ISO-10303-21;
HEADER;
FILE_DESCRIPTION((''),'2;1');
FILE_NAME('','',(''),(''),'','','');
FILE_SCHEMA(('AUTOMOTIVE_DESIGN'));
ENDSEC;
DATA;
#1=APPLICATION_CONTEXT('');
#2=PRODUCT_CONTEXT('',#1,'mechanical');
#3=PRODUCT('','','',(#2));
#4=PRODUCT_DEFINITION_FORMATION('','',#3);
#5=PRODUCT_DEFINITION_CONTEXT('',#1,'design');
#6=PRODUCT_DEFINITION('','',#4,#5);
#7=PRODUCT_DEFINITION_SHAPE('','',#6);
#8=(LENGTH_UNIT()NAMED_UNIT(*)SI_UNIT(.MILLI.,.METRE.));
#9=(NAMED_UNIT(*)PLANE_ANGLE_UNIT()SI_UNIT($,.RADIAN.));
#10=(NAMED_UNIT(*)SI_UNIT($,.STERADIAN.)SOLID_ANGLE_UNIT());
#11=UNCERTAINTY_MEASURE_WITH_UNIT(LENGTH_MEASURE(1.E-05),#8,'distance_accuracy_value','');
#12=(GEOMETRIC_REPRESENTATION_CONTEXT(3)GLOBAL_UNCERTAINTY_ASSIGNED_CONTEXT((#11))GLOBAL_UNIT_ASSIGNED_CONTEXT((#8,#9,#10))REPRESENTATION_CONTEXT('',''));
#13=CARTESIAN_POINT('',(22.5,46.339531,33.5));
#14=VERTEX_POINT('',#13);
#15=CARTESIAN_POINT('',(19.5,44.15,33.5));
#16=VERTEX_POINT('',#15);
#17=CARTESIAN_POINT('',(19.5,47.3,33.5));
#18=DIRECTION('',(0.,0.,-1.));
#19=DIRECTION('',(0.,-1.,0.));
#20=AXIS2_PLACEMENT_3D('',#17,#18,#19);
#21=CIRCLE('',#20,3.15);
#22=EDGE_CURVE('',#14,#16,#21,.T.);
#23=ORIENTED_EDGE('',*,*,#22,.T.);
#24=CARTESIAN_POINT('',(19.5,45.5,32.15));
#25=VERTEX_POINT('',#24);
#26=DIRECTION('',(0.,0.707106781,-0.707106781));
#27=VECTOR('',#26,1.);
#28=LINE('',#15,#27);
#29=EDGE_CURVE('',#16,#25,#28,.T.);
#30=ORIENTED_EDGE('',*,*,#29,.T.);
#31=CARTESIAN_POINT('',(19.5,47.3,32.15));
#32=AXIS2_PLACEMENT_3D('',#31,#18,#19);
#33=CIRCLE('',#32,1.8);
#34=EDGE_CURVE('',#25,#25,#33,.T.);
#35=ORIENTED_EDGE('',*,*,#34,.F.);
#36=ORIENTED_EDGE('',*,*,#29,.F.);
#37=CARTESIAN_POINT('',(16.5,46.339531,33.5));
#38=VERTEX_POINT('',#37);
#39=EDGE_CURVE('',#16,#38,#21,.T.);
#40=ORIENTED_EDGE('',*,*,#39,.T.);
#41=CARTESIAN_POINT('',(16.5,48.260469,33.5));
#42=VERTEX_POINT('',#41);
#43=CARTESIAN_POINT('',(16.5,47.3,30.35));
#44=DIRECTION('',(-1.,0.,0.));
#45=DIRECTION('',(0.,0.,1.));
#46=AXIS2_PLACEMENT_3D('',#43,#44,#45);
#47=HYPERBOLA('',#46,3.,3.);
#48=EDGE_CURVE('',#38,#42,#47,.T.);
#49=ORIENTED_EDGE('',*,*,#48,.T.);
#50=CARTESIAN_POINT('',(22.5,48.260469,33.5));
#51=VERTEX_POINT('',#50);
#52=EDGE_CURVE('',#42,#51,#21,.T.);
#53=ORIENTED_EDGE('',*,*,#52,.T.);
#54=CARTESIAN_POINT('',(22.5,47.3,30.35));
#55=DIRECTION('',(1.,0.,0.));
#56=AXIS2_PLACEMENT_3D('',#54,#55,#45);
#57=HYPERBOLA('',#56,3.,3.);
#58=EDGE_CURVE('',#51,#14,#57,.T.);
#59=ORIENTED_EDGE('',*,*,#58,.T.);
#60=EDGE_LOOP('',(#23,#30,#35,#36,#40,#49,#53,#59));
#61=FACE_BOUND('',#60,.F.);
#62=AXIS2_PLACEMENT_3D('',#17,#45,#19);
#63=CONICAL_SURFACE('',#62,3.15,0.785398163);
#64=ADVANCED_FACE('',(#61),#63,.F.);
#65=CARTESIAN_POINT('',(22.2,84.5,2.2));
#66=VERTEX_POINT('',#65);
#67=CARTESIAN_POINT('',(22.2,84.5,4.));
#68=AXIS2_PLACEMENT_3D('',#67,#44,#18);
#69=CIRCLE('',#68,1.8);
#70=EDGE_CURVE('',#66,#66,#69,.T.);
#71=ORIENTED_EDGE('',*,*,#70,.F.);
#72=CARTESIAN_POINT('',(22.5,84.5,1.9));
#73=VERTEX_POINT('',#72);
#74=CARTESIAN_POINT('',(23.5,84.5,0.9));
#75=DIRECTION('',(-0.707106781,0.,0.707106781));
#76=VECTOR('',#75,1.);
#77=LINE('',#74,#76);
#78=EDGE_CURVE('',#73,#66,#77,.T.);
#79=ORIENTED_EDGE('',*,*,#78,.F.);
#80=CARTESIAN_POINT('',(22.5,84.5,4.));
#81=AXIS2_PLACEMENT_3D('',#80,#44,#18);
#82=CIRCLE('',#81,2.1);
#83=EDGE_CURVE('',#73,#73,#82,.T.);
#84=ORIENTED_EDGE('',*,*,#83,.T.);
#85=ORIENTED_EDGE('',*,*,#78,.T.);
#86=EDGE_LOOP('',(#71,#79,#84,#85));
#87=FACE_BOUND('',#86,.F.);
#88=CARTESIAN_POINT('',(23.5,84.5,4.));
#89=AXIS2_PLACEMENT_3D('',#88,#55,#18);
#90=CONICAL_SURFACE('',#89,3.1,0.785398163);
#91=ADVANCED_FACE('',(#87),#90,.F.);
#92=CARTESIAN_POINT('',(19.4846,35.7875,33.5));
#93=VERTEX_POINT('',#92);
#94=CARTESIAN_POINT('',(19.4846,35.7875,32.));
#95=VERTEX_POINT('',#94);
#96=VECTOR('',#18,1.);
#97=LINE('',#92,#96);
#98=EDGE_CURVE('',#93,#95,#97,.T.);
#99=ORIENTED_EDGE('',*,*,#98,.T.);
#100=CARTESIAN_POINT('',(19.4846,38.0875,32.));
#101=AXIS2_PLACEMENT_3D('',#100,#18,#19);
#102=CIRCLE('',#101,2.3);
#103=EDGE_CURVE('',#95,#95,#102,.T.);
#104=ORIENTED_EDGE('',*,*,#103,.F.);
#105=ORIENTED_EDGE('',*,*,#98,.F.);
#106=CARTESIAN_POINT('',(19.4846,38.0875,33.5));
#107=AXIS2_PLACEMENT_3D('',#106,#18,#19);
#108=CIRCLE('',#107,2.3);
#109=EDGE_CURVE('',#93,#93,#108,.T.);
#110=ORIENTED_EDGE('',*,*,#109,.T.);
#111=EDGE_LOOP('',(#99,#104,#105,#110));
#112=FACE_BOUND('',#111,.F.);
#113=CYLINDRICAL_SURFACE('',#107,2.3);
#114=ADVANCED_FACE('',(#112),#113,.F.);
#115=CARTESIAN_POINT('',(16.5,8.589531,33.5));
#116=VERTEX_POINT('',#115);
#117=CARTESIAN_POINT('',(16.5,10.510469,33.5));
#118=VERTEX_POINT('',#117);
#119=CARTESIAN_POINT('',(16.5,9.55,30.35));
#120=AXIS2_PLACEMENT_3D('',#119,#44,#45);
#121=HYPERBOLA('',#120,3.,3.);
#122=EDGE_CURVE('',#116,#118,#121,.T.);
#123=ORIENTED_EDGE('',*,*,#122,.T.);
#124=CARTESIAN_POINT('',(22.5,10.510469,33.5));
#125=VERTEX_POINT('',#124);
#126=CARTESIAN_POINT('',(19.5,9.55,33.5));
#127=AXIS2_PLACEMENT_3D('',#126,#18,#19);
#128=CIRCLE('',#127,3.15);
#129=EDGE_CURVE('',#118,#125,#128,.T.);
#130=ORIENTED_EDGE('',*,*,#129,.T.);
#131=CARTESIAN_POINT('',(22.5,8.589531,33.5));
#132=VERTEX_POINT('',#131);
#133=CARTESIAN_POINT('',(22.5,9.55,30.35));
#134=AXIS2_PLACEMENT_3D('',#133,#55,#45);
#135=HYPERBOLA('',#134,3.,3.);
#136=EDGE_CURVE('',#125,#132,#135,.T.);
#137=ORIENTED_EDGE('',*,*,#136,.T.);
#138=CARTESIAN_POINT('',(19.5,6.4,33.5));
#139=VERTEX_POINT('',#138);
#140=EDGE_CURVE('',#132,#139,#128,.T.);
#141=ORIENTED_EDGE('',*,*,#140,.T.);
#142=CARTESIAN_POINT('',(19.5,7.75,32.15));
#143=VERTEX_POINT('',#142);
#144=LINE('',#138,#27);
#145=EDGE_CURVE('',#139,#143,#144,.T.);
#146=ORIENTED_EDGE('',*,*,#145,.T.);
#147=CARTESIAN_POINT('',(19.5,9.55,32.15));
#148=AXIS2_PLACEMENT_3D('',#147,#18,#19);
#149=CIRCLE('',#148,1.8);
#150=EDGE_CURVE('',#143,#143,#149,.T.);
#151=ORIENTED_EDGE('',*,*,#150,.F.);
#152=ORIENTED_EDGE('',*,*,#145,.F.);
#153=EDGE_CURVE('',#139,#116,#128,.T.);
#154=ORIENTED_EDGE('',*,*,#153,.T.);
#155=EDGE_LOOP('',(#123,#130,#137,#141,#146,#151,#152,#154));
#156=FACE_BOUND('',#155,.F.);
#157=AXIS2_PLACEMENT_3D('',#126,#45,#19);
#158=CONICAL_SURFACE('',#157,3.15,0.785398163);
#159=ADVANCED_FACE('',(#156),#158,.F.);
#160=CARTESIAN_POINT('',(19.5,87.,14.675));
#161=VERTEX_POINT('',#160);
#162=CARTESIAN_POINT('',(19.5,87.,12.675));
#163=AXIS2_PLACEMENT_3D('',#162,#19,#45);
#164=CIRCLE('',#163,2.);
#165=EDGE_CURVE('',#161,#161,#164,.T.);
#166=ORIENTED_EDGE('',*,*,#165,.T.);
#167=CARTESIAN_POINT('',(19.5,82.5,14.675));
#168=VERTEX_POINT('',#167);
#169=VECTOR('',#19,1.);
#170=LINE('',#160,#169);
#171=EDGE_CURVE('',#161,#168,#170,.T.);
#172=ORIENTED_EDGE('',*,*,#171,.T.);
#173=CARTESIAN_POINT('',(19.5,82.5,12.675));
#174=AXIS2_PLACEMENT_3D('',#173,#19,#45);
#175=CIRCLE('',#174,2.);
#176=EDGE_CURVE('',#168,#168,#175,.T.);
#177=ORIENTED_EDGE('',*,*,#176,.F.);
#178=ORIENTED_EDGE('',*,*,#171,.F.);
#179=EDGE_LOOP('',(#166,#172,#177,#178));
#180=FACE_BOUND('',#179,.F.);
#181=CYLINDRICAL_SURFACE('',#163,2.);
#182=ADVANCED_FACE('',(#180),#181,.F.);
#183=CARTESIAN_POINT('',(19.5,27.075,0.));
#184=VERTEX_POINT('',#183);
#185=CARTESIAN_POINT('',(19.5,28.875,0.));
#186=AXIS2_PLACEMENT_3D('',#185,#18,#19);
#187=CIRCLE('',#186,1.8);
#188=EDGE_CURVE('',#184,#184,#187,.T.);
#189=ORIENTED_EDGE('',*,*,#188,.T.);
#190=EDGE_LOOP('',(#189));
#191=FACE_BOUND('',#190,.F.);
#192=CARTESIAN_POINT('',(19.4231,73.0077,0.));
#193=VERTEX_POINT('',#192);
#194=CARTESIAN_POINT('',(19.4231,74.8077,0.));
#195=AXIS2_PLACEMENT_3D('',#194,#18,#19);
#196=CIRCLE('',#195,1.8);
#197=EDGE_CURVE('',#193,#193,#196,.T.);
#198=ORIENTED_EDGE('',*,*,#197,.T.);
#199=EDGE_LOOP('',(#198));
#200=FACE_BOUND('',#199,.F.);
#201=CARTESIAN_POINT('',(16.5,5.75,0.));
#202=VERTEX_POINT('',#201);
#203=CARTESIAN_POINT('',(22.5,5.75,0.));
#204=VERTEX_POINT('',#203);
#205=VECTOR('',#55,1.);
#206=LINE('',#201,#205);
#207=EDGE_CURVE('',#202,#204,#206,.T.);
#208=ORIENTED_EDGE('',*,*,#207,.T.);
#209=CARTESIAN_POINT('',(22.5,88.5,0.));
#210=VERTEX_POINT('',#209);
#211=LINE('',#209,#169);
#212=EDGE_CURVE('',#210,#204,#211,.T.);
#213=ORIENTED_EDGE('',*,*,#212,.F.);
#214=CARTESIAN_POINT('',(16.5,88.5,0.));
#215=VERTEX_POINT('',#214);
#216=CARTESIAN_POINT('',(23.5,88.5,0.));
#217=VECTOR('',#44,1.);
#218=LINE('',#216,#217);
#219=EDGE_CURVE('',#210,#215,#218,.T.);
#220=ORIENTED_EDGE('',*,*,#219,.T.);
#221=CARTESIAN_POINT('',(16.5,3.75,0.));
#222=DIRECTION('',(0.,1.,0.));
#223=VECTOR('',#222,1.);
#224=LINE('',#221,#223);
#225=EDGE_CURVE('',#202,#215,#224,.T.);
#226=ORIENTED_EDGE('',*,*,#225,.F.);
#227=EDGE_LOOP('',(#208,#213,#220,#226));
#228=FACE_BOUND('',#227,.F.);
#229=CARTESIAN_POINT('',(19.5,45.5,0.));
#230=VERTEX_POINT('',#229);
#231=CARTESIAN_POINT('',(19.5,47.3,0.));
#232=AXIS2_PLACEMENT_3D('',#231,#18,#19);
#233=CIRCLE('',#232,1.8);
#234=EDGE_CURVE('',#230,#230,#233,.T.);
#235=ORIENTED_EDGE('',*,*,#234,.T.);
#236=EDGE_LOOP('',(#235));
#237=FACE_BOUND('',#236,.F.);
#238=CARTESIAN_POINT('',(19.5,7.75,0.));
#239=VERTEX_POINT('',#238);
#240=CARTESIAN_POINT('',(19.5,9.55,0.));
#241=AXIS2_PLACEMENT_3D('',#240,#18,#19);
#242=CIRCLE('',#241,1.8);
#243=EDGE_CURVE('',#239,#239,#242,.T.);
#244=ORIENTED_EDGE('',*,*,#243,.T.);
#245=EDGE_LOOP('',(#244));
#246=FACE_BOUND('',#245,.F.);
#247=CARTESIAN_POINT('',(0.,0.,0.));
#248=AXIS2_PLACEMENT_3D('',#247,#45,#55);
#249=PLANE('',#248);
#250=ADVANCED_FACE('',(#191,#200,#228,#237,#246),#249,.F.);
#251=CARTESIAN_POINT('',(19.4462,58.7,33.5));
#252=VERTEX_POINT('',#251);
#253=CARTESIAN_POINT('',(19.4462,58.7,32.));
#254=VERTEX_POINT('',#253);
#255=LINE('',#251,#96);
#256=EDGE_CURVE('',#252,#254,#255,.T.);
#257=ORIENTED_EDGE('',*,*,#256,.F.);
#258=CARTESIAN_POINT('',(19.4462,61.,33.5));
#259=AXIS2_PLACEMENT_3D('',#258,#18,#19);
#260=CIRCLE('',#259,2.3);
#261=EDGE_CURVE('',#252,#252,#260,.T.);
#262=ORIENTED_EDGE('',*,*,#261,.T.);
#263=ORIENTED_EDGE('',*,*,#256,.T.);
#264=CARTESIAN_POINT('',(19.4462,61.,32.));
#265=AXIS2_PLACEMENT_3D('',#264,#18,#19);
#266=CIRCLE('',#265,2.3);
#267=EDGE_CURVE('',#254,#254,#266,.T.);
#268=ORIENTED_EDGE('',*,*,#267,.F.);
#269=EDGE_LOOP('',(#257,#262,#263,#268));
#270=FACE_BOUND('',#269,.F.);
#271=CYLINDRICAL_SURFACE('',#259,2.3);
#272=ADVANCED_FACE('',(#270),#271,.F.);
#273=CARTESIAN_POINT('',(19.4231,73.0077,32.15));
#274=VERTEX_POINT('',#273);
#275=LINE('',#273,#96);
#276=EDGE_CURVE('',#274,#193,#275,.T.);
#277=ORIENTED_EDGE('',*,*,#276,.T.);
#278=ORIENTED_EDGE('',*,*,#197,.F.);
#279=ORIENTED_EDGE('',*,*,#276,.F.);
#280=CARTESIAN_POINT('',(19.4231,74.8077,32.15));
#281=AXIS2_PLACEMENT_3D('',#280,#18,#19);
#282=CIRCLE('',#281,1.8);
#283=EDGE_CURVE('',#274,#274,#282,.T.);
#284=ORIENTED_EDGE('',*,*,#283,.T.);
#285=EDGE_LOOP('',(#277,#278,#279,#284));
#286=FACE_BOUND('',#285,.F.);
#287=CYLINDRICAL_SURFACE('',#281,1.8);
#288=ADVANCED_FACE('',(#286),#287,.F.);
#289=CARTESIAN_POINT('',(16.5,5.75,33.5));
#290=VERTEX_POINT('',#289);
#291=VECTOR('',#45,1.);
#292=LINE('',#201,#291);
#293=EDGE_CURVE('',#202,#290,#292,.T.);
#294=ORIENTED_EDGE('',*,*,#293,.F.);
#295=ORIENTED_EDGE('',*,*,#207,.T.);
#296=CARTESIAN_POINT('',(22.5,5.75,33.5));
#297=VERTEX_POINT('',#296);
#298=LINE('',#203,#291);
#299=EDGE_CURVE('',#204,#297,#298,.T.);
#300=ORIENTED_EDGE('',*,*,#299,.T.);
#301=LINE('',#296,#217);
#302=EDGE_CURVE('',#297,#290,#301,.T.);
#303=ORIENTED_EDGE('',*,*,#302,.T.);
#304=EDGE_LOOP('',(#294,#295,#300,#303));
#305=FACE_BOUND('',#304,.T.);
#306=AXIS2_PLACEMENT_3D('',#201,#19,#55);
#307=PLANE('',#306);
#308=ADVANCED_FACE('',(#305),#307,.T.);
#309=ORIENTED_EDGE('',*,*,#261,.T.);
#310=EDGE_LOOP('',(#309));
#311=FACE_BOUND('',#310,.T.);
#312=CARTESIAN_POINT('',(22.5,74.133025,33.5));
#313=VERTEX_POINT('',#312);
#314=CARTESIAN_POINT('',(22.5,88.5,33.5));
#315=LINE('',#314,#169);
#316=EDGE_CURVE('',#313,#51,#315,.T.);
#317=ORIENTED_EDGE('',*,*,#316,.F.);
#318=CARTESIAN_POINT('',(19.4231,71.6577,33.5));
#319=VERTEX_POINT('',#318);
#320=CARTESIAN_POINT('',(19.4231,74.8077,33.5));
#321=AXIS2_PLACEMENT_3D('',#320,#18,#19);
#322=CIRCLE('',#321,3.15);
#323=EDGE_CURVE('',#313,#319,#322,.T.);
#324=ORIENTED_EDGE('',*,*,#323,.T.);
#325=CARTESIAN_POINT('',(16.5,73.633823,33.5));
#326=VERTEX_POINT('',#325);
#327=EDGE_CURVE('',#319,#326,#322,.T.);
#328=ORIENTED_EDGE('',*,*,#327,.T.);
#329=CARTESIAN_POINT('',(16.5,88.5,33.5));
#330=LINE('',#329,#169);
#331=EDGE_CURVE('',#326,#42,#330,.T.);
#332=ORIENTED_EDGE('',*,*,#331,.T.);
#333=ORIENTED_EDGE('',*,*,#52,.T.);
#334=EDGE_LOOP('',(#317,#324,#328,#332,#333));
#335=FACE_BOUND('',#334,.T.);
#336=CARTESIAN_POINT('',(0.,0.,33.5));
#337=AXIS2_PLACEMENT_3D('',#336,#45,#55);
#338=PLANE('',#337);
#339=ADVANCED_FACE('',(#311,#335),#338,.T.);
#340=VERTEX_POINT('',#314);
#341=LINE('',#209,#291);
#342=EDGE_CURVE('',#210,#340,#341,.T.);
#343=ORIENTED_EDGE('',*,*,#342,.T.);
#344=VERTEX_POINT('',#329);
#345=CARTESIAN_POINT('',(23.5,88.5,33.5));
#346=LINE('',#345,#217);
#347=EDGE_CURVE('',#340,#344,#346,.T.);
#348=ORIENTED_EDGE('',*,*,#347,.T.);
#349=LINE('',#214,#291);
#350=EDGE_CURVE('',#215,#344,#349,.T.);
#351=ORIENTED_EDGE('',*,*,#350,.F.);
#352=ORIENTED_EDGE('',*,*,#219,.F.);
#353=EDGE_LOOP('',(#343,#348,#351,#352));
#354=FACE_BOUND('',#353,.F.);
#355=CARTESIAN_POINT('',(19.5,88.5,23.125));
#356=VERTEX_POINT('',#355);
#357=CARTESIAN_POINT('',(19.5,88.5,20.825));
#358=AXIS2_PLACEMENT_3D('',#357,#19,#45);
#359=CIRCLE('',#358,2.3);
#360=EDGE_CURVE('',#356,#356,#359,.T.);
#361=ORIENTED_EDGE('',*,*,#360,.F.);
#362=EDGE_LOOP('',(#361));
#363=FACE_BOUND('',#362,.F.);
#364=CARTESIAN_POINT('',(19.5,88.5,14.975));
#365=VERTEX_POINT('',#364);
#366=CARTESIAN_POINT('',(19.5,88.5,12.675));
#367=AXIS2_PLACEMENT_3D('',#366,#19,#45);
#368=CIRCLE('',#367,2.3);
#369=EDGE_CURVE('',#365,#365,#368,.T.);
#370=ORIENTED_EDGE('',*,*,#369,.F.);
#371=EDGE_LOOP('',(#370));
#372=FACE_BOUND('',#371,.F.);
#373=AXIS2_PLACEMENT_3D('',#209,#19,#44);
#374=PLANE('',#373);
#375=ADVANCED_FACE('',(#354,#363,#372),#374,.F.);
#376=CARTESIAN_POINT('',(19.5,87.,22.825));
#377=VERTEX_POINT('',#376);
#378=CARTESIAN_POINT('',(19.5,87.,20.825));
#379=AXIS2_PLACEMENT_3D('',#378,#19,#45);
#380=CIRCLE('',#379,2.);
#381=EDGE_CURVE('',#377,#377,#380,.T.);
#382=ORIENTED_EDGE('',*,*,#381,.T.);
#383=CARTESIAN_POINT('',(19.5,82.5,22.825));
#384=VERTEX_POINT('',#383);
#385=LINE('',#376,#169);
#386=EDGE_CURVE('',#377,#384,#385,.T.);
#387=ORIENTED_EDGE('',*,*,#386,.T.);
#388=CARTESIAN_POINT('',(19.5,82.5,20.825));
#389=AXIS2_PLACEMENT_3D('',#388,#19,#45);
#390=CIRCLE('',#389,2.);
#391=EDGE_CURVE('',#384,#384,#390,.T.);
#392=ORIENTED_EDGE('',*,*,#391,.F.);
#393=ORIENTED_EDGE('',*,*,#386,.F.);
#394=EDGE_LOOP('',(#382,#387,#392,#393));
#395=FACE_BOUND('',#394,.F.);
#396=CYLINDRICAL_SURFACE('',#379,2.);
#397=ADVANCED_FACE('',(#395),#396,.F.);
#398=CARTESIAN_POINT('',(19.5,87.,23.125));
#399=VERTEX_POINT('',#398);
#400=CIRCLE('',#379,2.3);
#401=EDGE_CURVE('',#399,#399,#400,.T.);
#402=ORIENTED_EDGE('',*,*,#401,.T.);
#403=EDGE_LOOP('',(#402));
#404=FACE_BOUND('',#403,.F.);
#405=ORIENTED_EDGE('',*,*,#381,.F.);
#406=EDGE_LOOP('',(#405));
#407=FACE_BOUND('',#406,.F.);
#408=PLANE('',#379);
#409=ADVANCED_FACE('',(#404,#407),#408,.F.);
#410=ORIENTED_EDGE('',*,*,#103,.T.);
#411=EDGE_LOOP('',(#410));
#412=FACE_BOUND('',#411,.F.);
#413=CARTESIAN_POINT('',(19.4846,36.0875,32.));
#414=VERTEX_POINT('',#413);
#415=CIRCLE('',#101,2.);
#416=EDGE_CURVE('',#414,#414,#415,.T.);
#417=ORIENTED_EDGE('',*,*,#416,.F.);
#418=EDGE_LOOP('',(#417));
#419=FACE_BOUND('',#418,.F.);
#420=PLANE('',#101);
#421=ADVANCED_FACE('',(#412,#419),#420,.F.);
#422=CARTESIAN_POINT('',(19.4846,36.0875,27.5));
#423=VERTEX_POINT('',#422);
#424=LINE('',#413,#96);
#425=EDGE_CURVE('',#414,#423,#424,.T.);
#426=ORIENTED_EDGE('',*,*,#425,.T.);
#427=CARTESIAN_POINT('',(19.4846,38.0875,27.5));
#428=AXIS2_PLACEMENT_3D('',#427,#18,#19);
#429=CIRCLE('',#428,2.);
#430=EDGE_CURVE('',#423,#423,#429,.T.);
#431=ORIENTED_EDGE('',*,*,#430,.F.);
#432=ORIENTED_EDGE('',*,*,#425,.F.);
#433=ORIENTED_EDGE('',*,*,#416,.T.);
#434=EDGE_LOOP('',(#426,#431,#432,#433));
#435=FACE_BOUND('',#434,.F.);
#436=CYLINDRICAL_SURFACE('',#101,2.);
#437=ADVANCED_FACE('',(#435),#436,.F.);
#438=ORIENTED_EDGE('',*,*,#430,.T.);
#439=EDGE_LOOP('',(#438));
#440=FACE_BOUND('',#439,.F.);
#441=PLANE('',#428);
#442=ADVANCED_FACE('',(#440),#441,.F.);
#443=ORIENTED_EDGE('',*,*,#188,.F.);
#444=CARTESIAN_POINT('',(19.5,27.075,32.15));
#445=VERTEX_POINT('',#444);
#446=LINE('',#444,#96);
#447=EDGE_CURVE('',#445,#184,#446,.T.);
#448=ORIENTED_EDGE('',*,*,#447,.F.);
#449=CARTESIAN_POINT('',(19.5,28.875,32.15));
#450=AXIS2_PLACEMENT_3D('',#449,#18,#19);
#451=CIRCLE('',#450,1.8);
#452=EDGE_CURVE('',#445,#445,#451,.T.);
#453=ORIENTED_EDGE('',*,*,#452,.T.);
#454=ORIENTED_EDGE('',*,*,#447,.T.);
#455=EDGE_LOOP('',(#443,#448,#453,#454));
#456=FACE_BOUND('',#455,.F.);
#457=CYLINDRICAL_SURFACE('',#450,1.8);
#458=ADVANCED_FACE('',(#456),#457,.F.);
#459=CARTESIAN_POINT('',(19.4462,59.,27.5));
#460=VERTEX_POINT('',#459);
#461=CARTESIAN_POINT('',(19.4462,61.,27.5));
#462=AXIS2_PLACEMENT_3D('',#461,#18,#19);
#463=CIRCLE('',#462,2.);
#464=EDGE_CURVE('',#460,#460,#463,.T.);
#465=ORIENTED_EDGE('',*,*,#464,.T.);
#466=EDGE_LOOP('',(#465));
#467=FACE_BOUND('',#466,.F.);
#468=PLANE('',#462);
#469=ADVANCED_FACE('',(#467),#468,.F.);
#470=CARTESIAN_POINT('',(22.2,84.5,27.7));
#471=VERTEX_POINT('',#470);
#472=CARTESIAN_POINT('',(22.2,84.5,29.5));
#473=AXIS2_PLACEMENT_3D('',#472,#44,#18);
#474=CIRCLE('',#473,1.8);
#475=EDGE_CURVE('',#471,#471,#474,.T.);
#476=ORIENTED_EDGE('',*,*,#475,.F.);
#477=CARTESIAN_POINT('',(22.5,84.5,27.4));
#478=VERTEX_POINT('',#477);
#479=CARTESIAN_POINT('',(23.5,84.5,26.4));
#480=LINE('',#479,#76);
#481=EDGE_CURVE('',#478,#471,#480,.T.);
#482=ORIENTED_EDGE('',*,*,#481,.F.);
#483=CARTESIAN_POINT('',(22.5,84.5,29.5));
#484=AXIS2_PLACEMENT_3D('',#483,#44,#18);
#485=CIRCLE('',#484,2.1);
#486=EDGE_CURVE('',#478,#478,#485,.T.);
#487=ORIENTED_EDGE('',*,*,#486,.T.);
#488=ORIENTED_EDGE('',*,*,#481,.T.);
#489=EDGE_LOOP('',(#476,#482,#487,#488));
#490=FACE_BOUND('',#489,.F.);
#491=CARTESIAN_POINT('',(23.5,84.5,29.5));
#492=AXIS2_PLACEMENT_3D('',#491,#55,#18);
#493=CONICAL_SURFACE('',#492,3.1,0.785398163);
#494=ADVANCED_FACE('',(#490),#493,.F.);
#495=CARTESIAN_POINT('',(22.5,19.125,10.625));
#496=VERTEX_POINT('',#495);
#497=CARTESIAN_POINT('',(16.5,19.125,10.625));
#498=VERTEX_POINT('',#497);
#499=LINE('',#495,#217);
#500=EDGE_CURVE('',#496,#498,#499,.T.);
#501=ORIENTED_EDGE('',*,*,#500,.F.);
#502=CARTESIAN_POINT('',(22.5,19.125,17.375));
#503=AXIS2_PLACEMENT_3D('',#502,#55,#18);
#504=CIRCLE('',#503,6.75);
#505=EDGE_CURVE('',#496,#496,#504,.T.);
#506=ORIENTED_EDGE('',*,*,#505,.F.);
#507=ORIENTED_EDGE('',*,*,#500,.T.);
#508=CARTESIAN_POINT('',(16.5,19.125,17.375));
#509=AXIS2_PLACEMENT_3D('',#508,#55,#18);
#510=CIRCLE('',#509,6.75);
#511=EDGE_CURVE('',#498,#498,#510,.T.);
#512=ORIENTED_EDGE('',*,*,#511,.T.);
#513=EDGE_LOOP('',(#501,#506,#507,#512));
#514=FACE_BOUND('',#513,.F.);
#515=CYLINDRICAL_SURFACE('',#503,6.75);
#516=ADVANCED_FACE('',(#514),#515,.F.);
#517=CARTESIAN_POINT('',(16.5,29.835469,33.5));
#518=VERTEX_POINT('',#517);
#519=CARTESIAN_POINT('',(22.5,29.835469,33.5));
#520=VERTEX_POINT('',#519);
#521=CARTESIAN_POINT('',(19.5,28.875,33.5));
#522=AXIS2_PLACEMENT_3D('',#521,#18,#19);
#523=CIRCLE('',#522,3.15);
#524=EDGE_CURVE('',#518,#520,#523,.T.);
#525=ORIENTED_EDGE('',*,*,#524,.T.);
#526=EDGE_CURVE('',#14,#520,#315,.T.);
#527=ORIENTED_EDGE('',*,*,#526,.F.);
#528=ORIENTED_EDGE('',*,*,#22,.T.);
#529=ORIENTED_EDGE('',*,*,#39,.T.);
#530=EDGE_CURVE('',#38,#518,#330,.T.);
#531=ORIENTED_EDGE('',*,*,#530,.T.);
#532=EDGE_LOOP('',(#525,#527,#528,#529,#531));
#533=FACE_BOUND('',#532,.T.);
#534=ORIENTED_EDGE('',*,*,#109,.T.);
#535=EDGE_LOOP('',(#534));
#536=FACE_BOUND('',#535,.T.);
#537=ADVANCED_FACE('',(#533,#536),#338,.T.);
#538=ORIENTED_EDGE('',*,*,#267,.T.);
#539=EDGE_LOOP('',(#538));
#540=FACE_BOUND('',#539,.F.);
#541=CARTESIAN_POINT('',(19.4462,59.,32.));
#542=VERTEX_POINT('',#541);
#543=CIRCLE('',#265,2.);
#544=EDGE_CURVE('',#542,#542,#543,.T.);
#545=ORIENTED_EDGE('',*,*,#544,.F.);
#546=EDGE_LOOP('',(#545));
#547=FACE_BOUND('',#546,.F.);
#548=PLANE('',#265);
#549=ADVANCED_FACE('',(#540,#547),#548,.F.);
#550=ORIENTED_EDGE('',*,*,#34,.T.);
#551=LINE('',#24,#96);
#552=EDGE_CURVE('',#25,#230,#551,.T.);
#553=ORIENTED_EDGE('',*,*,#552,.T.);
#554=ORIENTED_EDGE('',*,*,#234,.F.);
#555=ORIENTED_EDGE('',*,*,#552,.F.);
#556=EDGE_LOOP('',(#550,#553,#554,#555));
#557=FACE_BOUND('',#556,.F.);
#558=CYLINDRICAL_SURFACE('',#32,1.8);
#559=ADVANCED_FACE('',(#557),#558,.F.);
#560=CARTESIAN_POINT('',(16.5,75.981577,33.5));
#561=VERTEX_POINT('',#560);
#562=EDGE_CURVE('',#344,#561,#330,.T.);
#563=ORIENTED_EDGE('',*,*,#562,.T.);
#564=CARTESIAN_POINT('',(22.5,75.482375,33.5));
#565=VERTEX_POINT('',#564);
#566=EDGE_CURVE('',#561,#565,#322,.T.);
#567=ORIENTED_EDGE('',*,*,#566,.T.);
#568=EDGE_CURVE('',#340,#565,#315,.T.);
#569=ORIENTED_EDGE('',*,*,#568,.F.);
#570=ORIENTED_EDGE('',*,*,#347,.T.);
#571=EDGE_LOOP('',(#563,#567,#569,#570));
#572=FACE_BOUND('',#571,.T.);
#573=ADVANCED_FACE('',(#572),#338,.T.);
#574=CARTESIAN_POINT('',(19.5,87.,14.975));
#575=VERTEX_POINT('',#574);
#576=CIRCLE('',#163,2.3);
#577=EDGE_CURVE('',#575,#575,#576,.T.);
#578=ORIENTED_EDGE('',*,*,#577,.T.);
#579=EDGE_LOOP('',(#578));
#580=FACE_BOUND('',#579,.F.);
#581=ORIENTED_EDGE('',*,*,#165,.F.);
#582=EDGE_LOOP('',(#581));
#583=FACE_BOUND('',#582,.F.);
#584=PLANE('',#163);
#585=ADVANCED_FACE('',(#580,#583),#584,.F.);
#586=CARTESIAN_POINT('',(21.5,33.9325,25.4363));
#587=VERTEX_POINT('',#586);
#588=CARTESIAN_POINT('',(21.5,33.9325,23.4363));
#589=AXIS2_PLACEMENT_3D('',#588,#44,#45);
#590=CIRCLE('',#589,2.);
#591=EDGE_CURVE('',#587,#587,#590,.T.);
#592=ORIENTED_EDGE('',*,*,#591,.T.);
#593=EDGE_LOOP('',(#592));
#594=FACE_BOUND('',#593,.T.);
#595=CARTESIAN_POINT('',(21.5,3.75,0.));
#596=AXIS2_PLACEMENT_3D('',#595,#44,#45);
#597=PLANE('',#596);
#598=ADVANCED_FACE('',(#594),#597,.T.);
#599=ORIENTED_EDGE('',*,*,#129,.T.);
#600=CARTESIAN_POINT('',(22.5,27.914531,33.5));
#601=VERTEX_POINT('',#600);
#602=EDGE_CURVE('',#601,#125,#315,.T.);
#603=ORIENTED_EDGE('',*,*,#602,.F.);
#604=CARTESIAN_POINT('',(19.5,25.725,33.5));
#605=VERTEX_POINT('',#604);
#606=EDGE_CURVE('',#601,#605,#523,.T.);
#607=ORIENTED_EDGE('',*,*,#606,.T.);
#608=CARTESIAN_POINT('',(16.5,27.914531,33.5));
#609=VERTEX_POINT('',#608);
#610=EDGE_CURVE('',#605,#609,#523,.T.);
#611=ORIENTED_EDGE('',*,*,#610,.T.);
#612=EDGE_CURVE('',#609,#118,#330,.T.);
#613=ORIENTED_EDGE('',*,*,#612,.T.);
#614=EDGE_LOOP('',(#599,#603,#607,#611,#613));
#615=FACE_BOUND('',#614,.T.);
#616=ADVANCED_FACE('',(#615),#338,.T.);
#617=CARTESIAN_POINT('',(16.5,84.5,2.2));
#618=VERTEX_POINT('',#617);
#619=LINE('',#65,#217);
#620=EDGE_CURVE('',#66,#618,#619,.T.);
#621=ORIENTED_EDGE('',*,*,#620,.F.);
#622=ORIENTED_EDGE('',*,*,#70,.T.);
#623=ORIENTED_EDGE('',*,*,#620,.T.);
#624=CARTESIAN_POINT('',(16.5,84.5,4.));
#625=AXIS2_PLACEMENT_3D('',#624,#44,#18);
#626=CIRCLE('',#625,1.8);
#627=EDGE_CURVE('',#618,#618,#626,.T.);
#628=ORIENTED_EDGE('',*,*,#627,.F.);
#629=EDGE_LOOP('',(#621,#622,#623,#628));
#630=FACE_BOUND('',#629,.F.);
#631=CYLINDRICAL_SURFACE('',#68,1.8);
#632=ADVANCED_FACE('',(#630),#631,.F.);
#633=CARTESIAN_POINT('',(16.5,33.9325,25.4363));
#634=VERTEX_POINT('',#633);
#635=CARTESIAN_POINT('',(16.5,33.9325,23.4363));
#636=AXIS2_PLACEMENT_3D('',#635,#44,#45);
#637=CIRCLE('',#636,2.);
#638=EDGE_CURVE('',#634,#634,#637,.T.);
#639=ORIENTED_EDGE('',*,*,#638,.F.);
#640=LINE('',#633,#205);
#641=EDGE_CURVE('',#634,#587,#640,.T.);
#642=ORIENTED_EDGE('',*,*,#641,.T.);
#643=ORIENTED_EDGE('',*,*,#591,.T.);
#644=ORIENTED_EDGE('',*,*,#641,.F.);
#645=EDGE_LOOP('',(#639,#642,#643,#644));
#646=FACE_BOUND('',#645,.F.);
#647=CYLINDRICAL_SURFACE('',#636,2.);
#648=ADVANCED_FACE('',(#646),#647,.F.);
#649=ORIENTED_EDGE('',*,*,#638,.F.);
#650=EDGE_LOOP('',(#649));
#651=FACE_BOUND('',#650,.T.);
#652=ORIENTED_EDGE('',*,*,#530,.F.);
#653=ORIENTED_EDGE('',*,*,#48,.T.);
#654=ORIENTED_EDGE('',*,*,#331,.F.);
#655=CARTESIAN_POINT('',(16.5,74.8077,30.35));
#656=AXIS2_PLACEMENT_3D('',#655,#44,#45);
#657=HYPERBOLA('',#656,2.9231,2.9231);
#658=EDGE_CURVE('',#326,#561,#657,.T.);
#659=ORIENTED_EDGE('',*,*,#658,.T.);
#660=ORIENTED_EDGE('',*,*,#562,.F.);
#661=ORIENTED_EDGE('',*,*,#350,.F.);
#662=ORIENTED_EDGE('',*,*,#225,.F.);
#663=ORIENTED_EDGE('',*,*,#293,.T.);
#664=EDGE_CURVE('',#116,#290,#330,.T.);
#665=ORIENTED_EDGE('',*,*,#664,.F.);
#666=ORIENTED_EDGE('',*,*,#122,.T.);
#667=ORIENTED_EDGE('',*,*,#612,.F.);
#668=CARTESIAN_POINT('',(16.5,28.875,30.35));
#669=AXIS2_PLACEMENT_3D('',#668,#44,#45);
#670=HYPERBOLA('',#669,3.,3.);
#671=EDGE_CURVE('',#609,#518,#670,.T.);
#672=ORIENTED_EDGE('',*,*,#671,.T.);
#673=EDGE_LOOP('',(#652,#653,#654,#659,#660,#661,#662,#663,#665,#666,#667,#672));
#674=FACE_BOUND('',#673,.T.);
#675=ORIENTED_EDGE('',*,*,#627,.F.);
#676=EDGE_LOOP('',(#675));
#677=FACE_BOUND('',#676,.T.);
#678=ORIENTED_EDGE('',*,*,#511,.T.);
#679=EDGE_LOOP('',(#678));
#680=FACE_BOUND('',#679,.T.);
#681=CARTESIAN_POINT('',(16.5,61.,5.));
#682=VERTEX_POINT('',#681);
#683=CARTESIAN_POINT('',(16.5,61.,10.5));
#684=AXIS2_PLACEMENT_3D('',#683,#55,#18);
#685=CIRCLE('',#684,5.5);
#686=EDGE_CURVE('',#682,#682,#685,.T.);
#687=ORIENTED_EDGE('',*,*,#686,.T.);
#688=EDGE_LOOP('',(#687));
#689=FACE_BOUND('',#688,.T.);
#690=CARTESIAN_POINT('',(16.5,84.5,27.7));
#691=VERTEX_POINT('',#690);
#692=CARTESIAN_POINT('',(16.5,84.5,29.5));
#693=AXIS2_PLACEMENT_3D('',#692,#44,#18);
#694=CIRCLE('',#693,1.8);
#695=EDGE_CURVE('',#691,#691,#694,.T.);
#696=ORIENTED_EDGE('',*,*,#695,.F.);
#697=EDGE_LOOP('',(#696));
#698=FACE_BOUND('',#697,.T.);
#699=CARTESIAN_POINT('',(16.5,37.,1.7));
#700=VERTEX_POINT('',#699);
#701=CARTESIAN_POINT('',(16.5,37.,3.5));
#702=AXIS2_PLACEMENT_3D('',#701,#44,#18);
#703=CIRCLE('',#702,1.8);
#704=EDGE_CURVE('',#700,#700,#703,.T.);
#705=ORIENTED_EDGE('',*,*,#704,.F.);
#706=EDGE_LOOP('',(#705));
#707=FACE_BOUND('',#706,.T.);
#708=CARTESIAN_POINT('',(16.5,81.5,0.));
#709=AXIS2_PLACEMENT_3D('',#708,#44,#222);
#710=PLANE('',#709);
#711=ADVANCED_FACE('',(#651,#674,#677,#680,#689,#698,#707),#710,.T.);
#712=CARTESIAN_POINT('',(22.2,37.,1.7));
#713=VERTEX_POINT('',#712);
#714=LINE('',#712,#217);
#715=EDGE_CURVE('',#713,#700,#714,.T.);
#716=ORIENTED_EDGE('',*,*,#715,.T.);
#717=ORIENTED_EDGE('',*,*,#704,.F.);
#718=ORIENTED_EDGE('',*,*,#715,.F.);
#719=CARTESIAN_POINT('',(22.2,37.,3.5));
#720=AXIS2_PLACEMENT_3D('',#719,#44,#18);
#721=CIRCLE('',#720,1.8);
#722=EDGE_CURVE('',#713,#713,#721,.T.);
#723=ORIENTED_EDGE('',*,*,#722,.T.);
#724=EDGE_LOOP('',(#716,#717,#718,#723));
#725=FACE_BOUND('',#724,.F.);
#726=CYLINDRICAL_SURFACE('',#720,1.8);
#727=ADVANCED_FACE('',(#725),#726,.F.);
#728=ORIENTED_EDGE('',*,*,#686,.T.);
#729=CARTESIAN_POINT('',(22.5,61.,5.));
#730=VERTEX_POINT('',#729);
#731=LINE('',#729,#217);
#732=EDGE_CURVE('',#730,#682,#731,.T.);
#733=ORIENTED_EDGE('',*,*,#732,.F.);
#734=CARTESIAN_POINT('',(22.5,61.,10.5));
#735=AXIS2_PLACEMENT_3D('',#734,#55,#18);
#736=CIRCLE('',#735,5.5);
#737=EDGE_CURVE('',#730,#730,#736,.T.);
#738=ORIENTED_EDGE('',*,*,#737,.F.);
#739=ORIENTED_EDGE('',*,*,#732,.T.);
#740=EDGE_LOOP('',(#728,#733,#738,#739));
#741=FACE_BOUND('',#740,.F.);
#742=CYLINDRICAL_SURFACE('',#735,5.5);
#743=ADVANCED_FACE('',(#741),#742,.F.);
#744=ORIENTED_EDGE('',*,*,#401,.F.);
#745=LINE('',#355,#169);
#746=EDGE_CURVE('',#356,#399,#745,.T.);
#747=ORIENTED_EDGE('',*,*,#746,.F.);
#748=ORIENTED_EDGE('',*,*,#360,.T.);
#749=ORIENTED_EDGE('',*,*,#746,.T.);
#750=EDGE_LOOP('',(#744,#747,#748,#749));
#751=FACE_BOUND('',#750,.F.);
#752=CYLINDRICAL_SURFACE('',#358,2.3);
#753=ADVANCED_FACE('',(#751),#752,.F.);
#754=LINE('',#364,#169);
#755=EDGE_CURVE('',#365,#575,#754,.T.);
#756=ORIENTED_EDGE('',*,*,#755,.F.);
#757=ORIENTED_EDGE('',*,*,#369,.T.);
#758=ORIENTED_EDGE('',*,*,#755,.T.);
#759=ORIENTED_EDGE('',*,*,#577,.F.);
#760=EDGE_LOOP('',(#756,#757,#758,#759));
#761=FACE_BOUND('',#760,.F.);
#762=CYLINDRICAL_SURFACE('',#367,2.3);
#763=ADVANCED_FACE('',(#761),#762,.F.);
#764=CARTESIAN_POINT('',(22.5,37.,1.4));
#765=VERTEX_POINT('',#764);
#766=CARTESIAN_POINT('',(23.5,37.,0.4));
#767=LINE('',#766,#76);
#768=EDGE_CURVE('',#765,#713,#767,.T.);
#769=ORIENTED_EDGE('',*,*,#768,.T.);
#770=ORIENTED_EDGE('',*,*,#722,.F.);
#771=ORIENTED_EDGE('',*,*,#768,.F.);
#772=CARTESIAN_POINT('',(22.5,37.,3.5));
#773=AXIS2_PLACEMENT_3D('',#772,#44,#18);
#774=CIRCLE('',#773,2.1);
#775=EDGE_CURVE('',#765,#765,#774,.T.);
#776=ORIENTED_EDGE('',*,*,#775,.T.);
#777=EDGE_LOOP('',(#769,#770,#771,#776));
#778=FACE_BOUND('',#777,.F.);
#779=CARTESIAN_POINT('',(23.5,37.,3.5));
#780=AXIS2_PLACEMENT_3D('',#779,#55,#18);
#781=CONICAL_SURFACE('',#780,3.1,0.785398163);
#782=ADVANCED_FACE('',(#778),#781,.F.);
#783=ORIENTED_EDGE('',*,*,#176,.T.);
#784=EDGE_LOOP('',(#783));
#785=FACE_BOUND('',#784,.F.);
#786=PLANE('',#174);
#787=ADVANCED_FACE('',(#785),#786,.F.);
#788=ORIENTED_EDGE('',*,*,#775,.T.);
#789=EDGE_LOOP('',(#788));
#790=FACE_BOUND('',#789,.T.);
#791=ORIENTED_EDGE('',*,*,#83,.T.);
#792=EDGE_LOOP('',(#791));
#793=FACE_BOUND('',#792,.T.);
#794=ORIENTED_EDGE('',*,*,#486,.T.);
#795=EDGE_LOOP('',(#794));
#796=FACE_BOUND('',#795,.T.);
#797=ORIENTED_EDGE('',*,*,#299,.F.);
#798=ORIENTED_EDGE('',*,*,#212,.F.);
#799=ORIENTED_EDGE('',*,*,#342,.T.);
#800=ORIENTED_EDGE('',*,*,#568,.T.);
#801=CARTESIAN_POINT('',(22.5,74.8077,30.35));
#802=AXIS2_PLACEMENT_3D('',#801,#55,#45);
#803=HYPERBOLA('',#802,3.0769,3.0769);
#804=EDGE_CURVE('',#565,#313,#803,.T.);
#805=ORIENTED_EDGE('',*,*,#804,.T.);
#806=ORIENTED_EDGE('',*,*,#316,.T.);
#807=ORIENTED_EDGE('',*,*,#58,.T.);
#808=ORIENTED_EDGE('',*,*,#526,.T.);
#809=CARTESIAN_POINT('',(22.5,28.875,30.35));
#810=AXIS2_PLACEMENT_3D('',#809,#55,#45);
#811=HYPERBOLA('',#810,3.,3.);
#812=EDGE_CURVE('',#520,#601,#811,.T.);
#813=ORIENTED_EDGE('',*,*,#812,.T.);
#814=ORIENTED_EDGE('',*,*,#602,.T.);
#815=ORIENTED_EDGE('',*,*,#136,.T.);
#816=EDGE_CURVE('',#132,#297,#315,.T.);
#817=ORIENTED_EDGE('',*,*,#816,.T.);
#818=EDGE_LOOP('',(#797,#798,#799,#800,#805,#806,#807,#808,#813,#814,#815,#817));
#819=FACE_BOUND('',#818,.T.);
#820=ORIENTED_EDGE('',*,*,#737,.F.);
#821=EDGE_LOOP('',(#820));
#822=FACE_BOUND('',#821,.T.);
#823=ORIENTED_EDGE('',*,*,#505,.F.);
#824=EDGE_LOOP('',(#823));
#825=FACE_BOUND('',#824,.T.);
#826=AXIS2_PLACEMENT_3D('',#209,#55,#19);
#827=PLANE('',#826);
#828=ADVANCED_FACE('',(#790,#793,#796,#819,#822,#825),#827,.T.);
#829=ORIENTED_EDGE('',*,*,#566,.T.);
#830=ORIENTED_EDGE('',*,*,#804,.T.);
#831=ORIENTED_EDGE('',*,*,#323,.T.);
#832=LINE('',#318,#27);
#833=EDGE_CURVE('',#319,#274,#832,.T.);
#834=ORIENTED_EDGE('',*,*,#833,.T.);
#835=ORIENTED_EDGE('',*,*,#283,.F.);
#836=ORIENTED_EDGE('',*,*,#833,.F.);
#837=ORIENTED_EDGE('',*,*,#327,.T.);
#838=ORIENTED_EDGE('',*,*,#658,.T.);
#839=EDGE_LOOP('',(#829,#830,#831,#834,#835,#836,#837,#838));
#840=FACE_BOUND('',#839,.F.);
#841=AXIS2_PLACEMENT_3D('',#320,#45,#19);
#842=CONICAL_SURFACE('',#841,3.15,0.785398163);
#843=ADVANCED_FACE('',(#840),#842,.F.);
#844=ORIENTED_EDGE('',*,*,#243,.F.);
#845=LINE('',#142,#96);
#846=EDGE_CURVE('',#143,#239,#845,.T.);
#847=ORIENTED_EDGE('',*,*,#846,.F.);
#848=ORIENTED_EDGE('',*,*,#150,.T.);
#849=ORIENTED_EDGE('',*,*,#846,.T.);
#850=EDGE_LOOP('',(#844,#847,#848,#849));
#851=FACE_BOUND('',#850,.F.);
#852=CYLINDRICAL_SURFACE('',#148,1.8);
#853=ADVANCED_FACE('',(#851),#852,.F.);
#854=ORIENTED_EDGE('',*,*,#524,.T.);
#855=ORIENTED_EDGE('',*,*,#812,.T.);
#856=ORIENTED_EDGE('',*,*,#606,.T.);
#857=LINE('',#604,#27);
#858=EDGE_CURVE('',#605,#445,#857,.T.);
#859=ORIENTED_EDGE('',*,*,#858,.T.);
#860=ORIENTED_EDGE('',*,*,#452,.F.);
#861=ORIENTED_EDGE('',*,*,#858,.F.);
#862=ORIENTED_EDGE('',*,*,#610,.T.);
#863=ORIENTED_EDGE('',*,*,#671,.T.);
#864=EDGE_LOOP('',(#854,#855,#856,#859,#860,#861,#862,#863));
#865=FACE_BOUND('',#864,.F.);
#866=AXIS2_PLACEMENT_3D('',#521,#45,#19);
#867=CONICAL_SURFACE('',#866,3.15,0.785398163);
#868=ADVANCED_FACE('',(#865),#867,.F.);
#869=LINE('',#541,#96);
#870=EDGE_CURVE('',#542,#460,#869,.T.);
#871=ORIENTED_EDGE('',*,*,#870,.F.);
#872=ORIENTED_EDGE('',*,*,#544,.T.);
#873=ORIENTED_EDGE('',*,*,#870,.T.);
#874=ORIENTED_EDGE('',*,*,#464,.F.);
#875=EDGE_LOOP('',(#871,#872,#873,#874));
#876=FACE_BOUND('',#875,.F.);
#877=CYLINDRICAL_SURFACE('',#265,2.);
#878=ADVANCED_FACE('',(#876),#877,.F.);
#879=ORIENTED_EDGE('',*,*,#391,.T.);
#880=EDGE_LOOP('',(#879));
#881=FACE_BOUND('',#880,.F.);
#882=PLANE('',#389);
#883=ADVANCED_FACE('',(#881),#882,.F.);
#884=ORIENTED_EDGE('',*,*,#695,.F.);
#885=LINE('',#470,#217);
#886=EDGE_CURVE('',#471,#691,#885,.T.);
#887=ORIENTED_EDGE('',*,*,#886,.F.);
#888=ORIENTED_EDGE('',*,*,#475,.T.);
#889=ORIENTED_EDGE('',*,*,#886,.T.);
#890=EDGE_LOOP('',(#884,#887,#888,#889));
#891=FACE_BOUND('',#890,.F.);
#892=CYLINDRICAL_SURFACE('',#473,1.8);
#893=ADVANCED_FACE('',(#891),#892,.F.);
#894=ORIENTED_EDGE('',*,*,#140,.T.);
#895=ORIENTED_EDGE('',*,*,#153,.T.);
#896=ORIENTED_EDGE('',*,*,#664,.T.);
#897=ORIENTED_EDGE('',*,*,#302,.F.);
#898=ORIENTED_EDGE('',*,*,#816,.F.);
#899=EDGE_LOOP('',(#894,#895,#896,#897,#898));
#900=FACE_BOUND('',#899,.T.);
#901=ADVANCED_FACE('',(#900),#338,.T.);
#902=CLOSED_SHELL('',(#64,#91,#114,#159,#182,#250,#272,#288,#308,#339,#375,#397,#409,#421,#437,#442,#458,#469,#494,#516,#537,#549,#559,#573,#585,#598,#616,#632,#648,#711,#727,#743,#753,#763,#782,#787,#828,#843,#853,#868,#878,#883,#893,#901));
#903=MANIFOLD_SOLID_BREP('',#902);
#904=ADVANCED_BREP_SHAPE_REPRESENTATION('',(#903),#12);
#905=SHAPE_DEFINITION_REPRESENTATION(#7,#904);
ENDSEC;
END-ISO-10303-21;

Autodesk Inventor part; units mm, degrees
ref_plane "YZ Plane" through (0, 0, 0) normal (1, 0, 0) x (0, 1, 0)
ref_plane "XZ Plane" through (0, 0, 0) normal (0, 1, 0) x (-1, 0, 0)
ref_plane "Work Plane1" through (0, 0, 0) normal (0, 0, 1) x (1, 0, 0)
sketch "Sketch1" plane through (0, 0, 0) normal (0, 0, 1) x (1, 0, 0)
  line L0 (23.5, 88.5) -> (-23.5, 88.5)
  line L1 (-23.5, 88.5) -> (-23.5, 36.5)
  line L2 (-26.5, 33.5) -> (-89, 33.5)
  line L3 (-89, 33.5) -> (-89, -72.5)
  line L4 (-89, -72.5) -> (-77, -72.5)
  line L5 (-74, -75.5) -> (-74, -93.5)
  line L6 (-74, -93.5) -> (74, -93.5)
  line L7 (74, -93.5) -> (74, -75.5)
  line L8 (77, -72.5) -> (89, -72.5)
  line L9 (89, -72.5) -> (89, 33.5)
  line L10 (89, 33.5) -> (26.5, 33.5)
  line L11 (23.5, 36.5) -> (23.5, 88.5)
  line L12 (-4.5, 81.5) -> (-4.5, 36.5)
  line L13 (-7.5, 33.5) -> (-13.5, 33.5)
  line L14 (-16.5, 36.5) -> (-16.5, 81.5)
  line L15 (7.5, 84.5) -> (13.5, 84.5)
  line L16 (16.5, 81.5) -> (16.5, 36.5)
  line L17 (13.5, 33.5) -> (7.5, 33.5)
  line L18 (4.5, 36.5) -> (4.5, 81.5)
  line L19 (-13.5, 84.5) -> (-7.5, 84.5)
  line L20 (16.5, 88.5) -> (22.5, 88.5)
  line L21 (22.5, 88.5) -> (22.5, 3.75)
  line L22 (22.5, 3.75) -> (16.5, 3.75)
  line L23 (16.5, 3.75) -> (16.5, 88.5)
  line L24 (59.9, 4.75) -> (32.2, 4.75)
  arc A0 (13.5, 33.5) -> (16.5, 36.5) centre (13.5, 36.5) ccw
  arc A1 (4.5, 36.5) -> (7.5, 33.5) centre (7.5, 36.5) ccw
  arc A2 (7.5, 84.5) -> (4.5, 81.5) centre (7.5, 81.5) ccw
  arc A3 (16.5, 81.5) -> (13.5, 84.5) centre (13.5, 81.5) ccw
  arc A4 (-4.5, 81.5) -> (-7.5, 84.5) centre (-7.5, 81.5) ccw
  arc A5 (-7.5, 33.5) -> (-4.5, 36.5) centre (-7.5, 36.5) ccw
  arc A6 (-16.5, 36.5) -> (-13.5, 33.5) centre (-13.5, 36.5) ccw
  arc A7 (-13.5, 84.5) -> (-16.5, 81.5) centre (-13.5, 81.5) ccw
  arc A8 (-26.5, 33.5) -> (-23.5, 36.5) centre (-26.5, 36.5) ccw
  arc A9 (-74, -75.5) -> (-77, -72.5) centre (-77, -75.5) ccw
  arc A10 (77, -72.5) -> (74, -75.5) centre (77, -75.5) ccw
  arc A11 (23.5, 36.5) -> (26.5, 33.5) centre (26.5, 36.5) ccw
  circle A12 centre (21.5, -85.5) radius 1.8
  circle A13 centre (-64.5, -85.5) radius 1.8
  circle A14 centre (83.4, -16.3889) radius 1.8
  circle A15 centre (-83.4, -19.2889) radius 1.8
  circle A16 centre (-21.5, -85.5) radius 1.8
  circle A17 centre (64.5, -85.5) radius 1.8
  circle A18 centre (39.125, 4.3375) radius 1.0065
  circle A19 centre (-72.95, 4.275) radius 1.0065
  circle A20 centre (39.125, 25.9125) radius 1.0065
  circle A21 centre (72.95, 12.275) radius 1.0065
  circle A22 centre (86, 30.5) radius 1.0065
  circle A23 centre (-86, 30.5) radius 1.0065
  circle A24 centre (-39.125, 12.3375) radius 1.0065
  circle A25 centre (-72.95, 25.975) radius 1.0065
  circle A26 centre (-72.95, 12.275) radius 1.0065
  circle A27 centre (-39.125, 25.9125) radius 1.0065
  circle A28 centre (-86, 7.75) radius 1.0065
  circle A29 centre (86, 7.75) radius 1.0065
  circle A30 centre (72.95, 25.975) radius 1.0065
  circle A31 centre (39.125, 12.3375) radius 1.0065
  circle A32 centre (-39.125, 4.3375) radius 1.0065
  circle A33 centre (72.95, 4.275) radius 1.0065
  circle A34 centre (78, -67.1725) radius 1.2295
  circle A35 centre (-24.1, -73.1) radius 1.2295
  circle A36 centre (24.1, -24.9) radius 1.2295
  circle A37 centre (-42.4984, -44.6666) radius 1.2295
  circle A38 centre (-79, -42.3889) radius 1.2295
  circle A39 centre (-19.5, 28.875) radius 1.2295
  circle A40 centre (19.5, 9.55) radius 1.2295
  circle A41 centre (19.5, 47.3) radius 1.2295
  circle A42 centre (-19.5, 47.3) radius 1.2295
  circle A43 centre (0, 74.7) radius 1.2295
  circle A44 centre (-19.4231, 74.8077) radius 1.2295
  circle A45 centre (19.5, 74.7) radius 1.2295
  circle A46 centre (0, 49.05) radius 1.2295
  circle A47 centre (19.5, 28.875) radius 1.2295
  circle A48 centre (0, 19.125) radius 1.2295
  circle A49 centre (-19.5, 9.55) radius 1.2295
  circle A50 centre (-78, -67.1725) radius 1.2295
  circle A51 centre (-24.1, -24.9) radius 1.2295
  circle A52 centre (24.1, -73.1) radius 1.2295
  circle A53 centre (42.5, -44.6649) radius 1.2295
  circle A54 centre (79, -42.3889) radius 1.2295
  line L25 (74, -12.9454) -> (74, -38.6649)
  line L26 (32.5736, -41.3399) -> (10.2484, -66.6122)
  line L27 (40.7223, -24.1882) -> (40.7223, -2.7315)
  line L28 (15.0791, 0.2685) -> (31.7223, 0.2685)
  line L29 (-68.7516, -10.9592) -> (-46.0313, -36.6788)
  line L30 (-74, -38.6649) -> (-74, -12.9454)
  line L31 (43.7223, 0.2685) -> (62.6769, 0.2685)
  line L32 (-40.7223, -2.7315) -> (-40.7223, -24.1882)
  line L33 (-45.9707, -26.1743) -> (-64.9252, -4.7177)
  line L34 (46.0313, -36.6788) -> (68.7516, -10.9592)
  line L35 (-62.6769, 0.2685) -> (-43.7223, 0.2685)
  line L36 (34.7223, -2.7315) -> (34.7223, -24.9078)
  line L37 (29.5555, -26.9826) -> (10.5667, -7.1519)
  line L38 (-31.598, -53.0174) -> (-25.9833, -59.3733)
  line L39 (-10.5667, -7.1519) -> (-29.5555, -26.9826)
  line L40 (-34.7223, -24.9078) -> (-34.7223, -2.7315)
  line L41 (-31.7223, 0.2685) -> (-15.0791, 0.2685)
  line L42 (25.9833, -59.3733) -> (31.598, -53.0174)
  line L43 (64.9252, -4.7177) -> (45.9707, -26.1743)
  line L44 (-10.2484, -66.6122) -> (-32.5736, -41.3399)
  line L45 (-32.4921, -37.2789) -> (-10.1668, -13.9638)
  line L46 (10.1668, -13.9638) -> (32.4921, -37.2789)
  line L47 (29.5955, -81.1563) -> (25.3044, -62.0157)
  arc A55 (25.9833, -59.3733) -> (25.3044, -62.0157) centre (28.2317, -61.3594) ccw
  line L48 (43.9754, -47.6649) -> (68.9203, -47.6649)
  arc A56 (71.5475, -52.1134) -> (68.9203, -47.6649) centre (68.9203, -50.6649) ccw
  line L49 (71.5475, -52.1134) -> (58.4661, -75.8408)
  line L50 (46.5943, -83.5) -> (32.5229, -83.5)
  arc A57 (29.5955, -81.1563) -> (32.5229, -83.5) centre (32.5229, -80.5) ccw
  line L51 (-5, -16.0387) -> (-5, -64.6261)
  arc A58 (-10.2484, -66.6122) -> (-5, -64.6261) centre (-8, -64.6261) ccw
  arc A59 (-32.4921, -37.2789) -> (-32.5736, -41.3399) centre (-30.3253, -39.3537) ccw
  arc A60 (-5, -16.0387) -> (-10.1668, -13.9638) centre (-8, -16.0387) ccw
  arc A61 (-40.7223, -2.7315) -> (-43.7223, 0.2685) centre (-43.7223, -2.7315) ccw
  arc A62 (-45.9707, -26.1743) -> (-40.7223, -24.1882) centre (-43.7223, -24.1882) ccw
  arc A63 (-62.6769, 0.2685) -> (-64.9252, -4.7177) centre (-62.6769, -2.7315) ccw
  arc A64 (-25.3044, -62.0157) -> (-25.9833, -59.3733) centre (-28.2317, -61.3594) ccw
  line L52 (-25.3044, -62.0157) -> (-29.5955, -81.1563)
  arc A65 (-32.5229, -83.5) -> (-29.5955, -81.1563) centre (-32.5229, -80.5) ccw
  line L53 (-32.5229, -83.5) -> (-46.5943, -83.5)
  line L54 (-58.4661, -75.8408) -> (-71.5475, -52.1134)
  arc A66 (-68.9203, -47.6649) -> (-71.5475, -52.1134) centre (-68.9203, -50.6649) ccw
  line L55 (-68.9203, -47.6649) -> (-43.9754, -47.6649)
  line L56 (-49.775, 11.125) -> (-62.3, 11.125)
  arc A67 (-62.3, 27.125) -> (-62.3, 11.125) centre (-62.3, 19.125) ccw
  line L57 (-62.3, 27.125) -> (-49.775, 27.125)
  arc A68 (-49.775, 11.125) -> (-49.775, 27.125) centre (-49.775, 19.125) ccw
  arc A69 (-31.7223, 0.2685) -> (-34.7223, -2.7315) centre (-31.7223, -2.7315) ccw
  arc A70 (-12.9578, -0.6102) -> (-15.0791, 0.2685) centre (-15.0791, -2.7315) ccw
  line L58 (-12.9578, -0.6102) -> (-10.6122, -2.9558)
  arc A71 (-10.5667, -7.1519) -> (-10.6122, -2.9558) centre (-12.7335, -5.0771) ccw
  arc A72 (-34.7223, -24.9078) -> (-29.5555, -26.9826) centre (-31.7223, -24.9078) ccw
  arc A73 (71, -41.6649) -> (74, -38.6649) centre (71, -38.6649) ccw
  line L59 (71, -41.6649) -> (48.2797, -41.6649)
  arc A74 (46.0313, -36.6788) -> (48.2797, -41.6649) centre (48.2797, -38.6649) ccw
  arc A75 (74, -12.9454) -> (68.7516, -10.9592) centre (71, -12.9454) ccw
  arc A76 (40.7223, -24.1882) -> (45.9707, -26.1743) centre (43.7223, -24.1882) ccw
  arc A77 (43.7223, 0.2685) -> (40.7223, -2.7315) centre (43.7223, -2.7315) ccw
  arc A78 (64.9252, -4.7177) -> (62.6769, 0.2685) centre (62.6769, -2.7315) ccw
  arc A79 (5, -64.6261) -> (10.2484, -66.6122) centre (8, -64.6261) ccw
  line L60 (5, -64.6261) -> (5, -16.0387)
  arc A80 (10.1668, -13.9638) -> (5, -16.0387) centre (8, -16.0387) ccw
  arc A81 (32.5736, -41.3399) -> (32.4921, -37.2789) centre (30.3253, -39.3537) ccw
  arc A82 (29.5555, -26.9826) -> (34.7223, -24.9078) centre (31.7223, -24.9078) ccw
  arc A83 (10.6122, -2.9558) -> (10.5667, -7.1519) centre (12.7335, -5.0771) ccw
  line L61 (10.6122, -2.9558) -> (12.9578, -0.6102)
  arc A84 (15.0791, 0.2685) -> (12.9578, -0.6102) centre (15.0791, -2.7315) ccw
  arc A85 (34.7223, -2.7315) -> (31.7223, 0.2685) centre (31.7223, -2.7315) ccw
  arc A86 (-48.2797, -41.6649) -> (-46.0313, -36.6788) centre (-48.2797, -38.6649) ccw
  line L62 (-48.2797, -41.6649) -> (-71, -41.6649)
  arc A87 (-74, -38.6649) -> (-71, -41.6649) centre (-71, -38.6649) ccw
  arc A88 (-68.7516, -10.9592) -> (-74, -12.9454) centre (-71, -12.9454) ccw
  line L63 (49.775, 27.125) -> (62.3, 27.125)
  arc A89 (62.3, 11.125) -> (62.3, 27.125) centre (62.3, 19.125) ccw
  line L64 (62.3, 11.125) -> (49.775, 11.125)
  arc A90 (49.775, 27.125) -> (49.775, 11.125) centre (49.775, 19.125) ccw
  arc A91 (53.1556, -75.734) -> (58.4661, -75.8408) centre (55.8389, -74.3924) ccw
  line L65 (53.1556, -75.734) -> (41.2921, -52.0066)
  arc A92 (43.9754, -47.6649) -> (41.2921, -52.0066) centre (43.9754, -50.6649) ccw
  arc A93 (36.5297, -53.662) -> (31.598, -53.0174) centre (33.8464, -55.0036) ccw
  line L66 (36.5297, -53.662) -> (49.2776, -79.1584)
  arc A94 (46.5943, -83.5) -> (49.2776, -79.1584) centre (46.5943, -80.5) ccw
  arc A95 (-49.2776, -79.1584) -> (-46.5943, -83.5) centre (-46.5943, -80.5) ccw
  line L67 (-49.2776, -79.1584) -> (-36.5297, -53.662)
  arc A96 (-31.598, -53.0174) -> (-36.5297, -53.662) centre (-33.8464, -55.0036) ccw
  arc A97 (-41.2921, -52.0066) -> (-43.9754, -47.6649) centre (-43.9754, -50.6649) ccw
  line L68 (-41.2921, -52.0066) -> (-53.1556, -75.734)
  arc A98 (-58.4661, -75.8408) -> (-53.1556, -75.734) centre (-55.8389, -74.3924) ccw
  point P0 (0, 0)
  point P1 (7.5, 81.5)
  point P2 (13.5, 81.5)
  point P3 (-7.5, 81.5)
  point P4 (-13.5, 81.5)
  point P5 (-29, -78.5)
  point P6 (-57, -78.5)
  point P7 (29, -78.5)
  point P8 (57, -78.5)
  dimension "d0" = 1
  dimension "d1" = 1
ref_plane "Work Plane2" through (-89, -40.3889, 33.5) normal (0, 0, 1) x (1, 0, 0)
extrude "Extrusion1" add sketch "Sketch1" along normal up to surface (33.5 mm away) contours L21 L22 L23 L16 L0 | A40 | A41 | A45 | A47
sketch "Sketch2" plane through (22.5, 3.75, 0) normal (1, 0, 0) x (0, 0, -1)
  circle A0 centre (-17.375, 15.375) radius 6.75
  circle A1 centre (-10.5, 57.25) radius 5.5
  point P0 (0, -3.75)
  dimension "d8" = 11
extrude "Extrusion2" cut sketch "Sketch2" against normal up to next
sketch "Sketch3" plane through (16.5, 3.75, 0) normal (-1, 0, 0) x (0, 0, 1)
  circle A0 centre (23.4363, 30.1825) radius 2
  point P0 (0, -3.75)
extrude "Extrusion3" cut sketch "Sketch3" against normal blind 5
ref_plane "Work Plane3" through (23.5, 3.75, 0) normal (1, 0, 0) x (0, 0, -1)
sketch "Sketch4" plane through (23.5, 3.75, 0) normal (1, 0, 0) x (0, 0, -1)
  circle A0 centre (-29.5, 80.75) radius 1.8
  circle A1 centre (-3.5, 33.25) radius 1.8
  circle A2 centre (-4, 80.75) radius 1.8
  point P0 (0, -3.75)
hole "Hole1" at (23.5, 37, 3.5) at (23.5, 84.5, 4) at (23.5, 84.5, 29.5) direction (-1, 0, 0) diameter 3.6 end through all countersink diameter 6.2 countersink angle 90
sketch "Sketch5" plane through (16.5, 3.75, 33.5) normal (0, 0, 1) x (1, 0, 0)
  circle A0 centre (-36, 5.8) radius 1.8
  circle A1 centre (-36, 25.125) radius 1.8
  circle A2 centre (-36, 43.55) radius 1.8
  circle A3 centre (-35.9231, 71.0577) radius 1.8
  circle A4 centre (-16.5, 45.3) radius 3.3
  circle A5 centre (-16.5, 15.375) radius 3.3
  circle A6 centre (-16.5, 70.95) radius 3.3
  line L0 (-12, 2) -> (-21, 2)
  line L1 (-12, 84.75) -> (-12, 2)
  line L2 (-21, 84.75) -> (-12, 84.75)
  line L3 (-21, 2) -> (-21, 84.75)
  line L4 (-16.5, 2) -> (-16.5, 84.75)
  circle A7 centre (3, 5.8) radius 1.8
  circle A8 centre (3, 25.125) radius 1.8
  circle A9 centre (3, 43.55) radius 1.8
  circle A10 centre (2.9231, 71.0577) radius 1.8
  circle A11 centre (-16.5, 30.7161) radius 2.3
  circle A12 centre (-16.5, 59.25) radius 2.3
  point P0 (-16.5, -3.75)
hole "Hole2" at (19.5, 9.55, 33.5) at (19.5, 28.875, 33.5) at (19.5, 47.3, 33.5) at (19.4231, 74.8077, 33.5) direction (0, 0, -1) diameter 3.6 end through all countersink diameter 6.3 countersink angle 90
sketch "Sketch7" plane through (16.5, 88.5, 0) normal (0, 1, 0) x (1, 0, 0)
  line L0 (0, -33.5) -> (6, -33.5)
  line L1 (6, 0) -> (6, -33.5)
  line L2 (6, 0) -> (0, 0)
  line L3 (0, 0) -> (0, -33.5)
  circle A0 centre (-16.5, -12.675) radius 2
  circle A1 centre (-16.5, -20.825) radius 2
  line L4 (-16.5, -20.825) -> (6, -20.825)
  line L5 (-16.5, -12.675) -> (6, -12.675)
  line L6 (6, -5) -> (6, -16)
  point P0 (-16.5, 0)
  point P1 (3, -20.825)
  point P2 (3, -12.675)
hole "Hole4" at (19.5, 88.5, 20.825) at (19.5, 88.5, 12.675) direction (0, -1, 0) diameter 4 depth 6 counterbore diameter 4.6 counterbore depth 1.5
sketch "Sketch8" plane through (19.5, 47.3, 33.5) normal (0, 0, 1) x (1, 0, 0)
  circle A0 centre (-39, -9.2125) radius 2.3
  circle A1 centre (-39, 13.7) radius 2.3
  arc A2 (3, 0.9605) -> (-3, 0.9605) centre (0, 0) ccw
  line L0 (3, 26.8331) -> (3, 0.9605)
  arc A3 (-3, 26.3338) -> (3, 26.8331) centre (-0.0769, 27.5077) ccw
  line L1 (-3, 0.9605) -> (-3, 26.3338)
  arc A4 (-3, -0.9605) -> (3, -0.9605) centre (0, 0) ccw
  line L2 (-3, -17.4645) -> (-3, -0.9605)
  arc A5 (3, -17.4645) -> (-3, -17.4645) centre (0, -18.425) ccw
  line L3 (3, -0.9605) -> (3, -17.4645)
  line L4 (-39, 13.7) -> (3, 13.7)
  line L5 (3, 19.2) -> (3, 8.2)
  line L6 (-39, -9.2125) -> (3, -9.2125)
  circle A6 centre (0, -18.425) radius 1.8
  line L7 (0, -18.425) -> (-0.0769, 27.5077)
  point P0 (-19.5, -47.3)
  point P1 (-0.0538, 13.7)
  point P2 (-0.0154, -9.2125)
hole "Hole5" at (19.4462, 61, 33.5) at (19.4846, 38.0875, 33.5) direction (0, 0, -1) diameter 4 depth 6 counterbore diameter 4.6 counterbore depth 1.5
sketch "Sketch9" plane through (16.5, 3.75, 0) normal (0, -1, 0) x (1, 0, 0)
  line L0 (0, 0) -> (0, 33.5)
  line L1 (0, 0) -> (6, 0)
  line L2 (6, 0) -> (6, 33.5)
  line L3 (6, 33.5) -> (0, 33.5)
  point P0 (-16.5, 0)
extrude "Extrusion4" cut sketch "Sketch9" against normal blind 2
properties part number "left_gear_holder" material "Nylon 6/6"
